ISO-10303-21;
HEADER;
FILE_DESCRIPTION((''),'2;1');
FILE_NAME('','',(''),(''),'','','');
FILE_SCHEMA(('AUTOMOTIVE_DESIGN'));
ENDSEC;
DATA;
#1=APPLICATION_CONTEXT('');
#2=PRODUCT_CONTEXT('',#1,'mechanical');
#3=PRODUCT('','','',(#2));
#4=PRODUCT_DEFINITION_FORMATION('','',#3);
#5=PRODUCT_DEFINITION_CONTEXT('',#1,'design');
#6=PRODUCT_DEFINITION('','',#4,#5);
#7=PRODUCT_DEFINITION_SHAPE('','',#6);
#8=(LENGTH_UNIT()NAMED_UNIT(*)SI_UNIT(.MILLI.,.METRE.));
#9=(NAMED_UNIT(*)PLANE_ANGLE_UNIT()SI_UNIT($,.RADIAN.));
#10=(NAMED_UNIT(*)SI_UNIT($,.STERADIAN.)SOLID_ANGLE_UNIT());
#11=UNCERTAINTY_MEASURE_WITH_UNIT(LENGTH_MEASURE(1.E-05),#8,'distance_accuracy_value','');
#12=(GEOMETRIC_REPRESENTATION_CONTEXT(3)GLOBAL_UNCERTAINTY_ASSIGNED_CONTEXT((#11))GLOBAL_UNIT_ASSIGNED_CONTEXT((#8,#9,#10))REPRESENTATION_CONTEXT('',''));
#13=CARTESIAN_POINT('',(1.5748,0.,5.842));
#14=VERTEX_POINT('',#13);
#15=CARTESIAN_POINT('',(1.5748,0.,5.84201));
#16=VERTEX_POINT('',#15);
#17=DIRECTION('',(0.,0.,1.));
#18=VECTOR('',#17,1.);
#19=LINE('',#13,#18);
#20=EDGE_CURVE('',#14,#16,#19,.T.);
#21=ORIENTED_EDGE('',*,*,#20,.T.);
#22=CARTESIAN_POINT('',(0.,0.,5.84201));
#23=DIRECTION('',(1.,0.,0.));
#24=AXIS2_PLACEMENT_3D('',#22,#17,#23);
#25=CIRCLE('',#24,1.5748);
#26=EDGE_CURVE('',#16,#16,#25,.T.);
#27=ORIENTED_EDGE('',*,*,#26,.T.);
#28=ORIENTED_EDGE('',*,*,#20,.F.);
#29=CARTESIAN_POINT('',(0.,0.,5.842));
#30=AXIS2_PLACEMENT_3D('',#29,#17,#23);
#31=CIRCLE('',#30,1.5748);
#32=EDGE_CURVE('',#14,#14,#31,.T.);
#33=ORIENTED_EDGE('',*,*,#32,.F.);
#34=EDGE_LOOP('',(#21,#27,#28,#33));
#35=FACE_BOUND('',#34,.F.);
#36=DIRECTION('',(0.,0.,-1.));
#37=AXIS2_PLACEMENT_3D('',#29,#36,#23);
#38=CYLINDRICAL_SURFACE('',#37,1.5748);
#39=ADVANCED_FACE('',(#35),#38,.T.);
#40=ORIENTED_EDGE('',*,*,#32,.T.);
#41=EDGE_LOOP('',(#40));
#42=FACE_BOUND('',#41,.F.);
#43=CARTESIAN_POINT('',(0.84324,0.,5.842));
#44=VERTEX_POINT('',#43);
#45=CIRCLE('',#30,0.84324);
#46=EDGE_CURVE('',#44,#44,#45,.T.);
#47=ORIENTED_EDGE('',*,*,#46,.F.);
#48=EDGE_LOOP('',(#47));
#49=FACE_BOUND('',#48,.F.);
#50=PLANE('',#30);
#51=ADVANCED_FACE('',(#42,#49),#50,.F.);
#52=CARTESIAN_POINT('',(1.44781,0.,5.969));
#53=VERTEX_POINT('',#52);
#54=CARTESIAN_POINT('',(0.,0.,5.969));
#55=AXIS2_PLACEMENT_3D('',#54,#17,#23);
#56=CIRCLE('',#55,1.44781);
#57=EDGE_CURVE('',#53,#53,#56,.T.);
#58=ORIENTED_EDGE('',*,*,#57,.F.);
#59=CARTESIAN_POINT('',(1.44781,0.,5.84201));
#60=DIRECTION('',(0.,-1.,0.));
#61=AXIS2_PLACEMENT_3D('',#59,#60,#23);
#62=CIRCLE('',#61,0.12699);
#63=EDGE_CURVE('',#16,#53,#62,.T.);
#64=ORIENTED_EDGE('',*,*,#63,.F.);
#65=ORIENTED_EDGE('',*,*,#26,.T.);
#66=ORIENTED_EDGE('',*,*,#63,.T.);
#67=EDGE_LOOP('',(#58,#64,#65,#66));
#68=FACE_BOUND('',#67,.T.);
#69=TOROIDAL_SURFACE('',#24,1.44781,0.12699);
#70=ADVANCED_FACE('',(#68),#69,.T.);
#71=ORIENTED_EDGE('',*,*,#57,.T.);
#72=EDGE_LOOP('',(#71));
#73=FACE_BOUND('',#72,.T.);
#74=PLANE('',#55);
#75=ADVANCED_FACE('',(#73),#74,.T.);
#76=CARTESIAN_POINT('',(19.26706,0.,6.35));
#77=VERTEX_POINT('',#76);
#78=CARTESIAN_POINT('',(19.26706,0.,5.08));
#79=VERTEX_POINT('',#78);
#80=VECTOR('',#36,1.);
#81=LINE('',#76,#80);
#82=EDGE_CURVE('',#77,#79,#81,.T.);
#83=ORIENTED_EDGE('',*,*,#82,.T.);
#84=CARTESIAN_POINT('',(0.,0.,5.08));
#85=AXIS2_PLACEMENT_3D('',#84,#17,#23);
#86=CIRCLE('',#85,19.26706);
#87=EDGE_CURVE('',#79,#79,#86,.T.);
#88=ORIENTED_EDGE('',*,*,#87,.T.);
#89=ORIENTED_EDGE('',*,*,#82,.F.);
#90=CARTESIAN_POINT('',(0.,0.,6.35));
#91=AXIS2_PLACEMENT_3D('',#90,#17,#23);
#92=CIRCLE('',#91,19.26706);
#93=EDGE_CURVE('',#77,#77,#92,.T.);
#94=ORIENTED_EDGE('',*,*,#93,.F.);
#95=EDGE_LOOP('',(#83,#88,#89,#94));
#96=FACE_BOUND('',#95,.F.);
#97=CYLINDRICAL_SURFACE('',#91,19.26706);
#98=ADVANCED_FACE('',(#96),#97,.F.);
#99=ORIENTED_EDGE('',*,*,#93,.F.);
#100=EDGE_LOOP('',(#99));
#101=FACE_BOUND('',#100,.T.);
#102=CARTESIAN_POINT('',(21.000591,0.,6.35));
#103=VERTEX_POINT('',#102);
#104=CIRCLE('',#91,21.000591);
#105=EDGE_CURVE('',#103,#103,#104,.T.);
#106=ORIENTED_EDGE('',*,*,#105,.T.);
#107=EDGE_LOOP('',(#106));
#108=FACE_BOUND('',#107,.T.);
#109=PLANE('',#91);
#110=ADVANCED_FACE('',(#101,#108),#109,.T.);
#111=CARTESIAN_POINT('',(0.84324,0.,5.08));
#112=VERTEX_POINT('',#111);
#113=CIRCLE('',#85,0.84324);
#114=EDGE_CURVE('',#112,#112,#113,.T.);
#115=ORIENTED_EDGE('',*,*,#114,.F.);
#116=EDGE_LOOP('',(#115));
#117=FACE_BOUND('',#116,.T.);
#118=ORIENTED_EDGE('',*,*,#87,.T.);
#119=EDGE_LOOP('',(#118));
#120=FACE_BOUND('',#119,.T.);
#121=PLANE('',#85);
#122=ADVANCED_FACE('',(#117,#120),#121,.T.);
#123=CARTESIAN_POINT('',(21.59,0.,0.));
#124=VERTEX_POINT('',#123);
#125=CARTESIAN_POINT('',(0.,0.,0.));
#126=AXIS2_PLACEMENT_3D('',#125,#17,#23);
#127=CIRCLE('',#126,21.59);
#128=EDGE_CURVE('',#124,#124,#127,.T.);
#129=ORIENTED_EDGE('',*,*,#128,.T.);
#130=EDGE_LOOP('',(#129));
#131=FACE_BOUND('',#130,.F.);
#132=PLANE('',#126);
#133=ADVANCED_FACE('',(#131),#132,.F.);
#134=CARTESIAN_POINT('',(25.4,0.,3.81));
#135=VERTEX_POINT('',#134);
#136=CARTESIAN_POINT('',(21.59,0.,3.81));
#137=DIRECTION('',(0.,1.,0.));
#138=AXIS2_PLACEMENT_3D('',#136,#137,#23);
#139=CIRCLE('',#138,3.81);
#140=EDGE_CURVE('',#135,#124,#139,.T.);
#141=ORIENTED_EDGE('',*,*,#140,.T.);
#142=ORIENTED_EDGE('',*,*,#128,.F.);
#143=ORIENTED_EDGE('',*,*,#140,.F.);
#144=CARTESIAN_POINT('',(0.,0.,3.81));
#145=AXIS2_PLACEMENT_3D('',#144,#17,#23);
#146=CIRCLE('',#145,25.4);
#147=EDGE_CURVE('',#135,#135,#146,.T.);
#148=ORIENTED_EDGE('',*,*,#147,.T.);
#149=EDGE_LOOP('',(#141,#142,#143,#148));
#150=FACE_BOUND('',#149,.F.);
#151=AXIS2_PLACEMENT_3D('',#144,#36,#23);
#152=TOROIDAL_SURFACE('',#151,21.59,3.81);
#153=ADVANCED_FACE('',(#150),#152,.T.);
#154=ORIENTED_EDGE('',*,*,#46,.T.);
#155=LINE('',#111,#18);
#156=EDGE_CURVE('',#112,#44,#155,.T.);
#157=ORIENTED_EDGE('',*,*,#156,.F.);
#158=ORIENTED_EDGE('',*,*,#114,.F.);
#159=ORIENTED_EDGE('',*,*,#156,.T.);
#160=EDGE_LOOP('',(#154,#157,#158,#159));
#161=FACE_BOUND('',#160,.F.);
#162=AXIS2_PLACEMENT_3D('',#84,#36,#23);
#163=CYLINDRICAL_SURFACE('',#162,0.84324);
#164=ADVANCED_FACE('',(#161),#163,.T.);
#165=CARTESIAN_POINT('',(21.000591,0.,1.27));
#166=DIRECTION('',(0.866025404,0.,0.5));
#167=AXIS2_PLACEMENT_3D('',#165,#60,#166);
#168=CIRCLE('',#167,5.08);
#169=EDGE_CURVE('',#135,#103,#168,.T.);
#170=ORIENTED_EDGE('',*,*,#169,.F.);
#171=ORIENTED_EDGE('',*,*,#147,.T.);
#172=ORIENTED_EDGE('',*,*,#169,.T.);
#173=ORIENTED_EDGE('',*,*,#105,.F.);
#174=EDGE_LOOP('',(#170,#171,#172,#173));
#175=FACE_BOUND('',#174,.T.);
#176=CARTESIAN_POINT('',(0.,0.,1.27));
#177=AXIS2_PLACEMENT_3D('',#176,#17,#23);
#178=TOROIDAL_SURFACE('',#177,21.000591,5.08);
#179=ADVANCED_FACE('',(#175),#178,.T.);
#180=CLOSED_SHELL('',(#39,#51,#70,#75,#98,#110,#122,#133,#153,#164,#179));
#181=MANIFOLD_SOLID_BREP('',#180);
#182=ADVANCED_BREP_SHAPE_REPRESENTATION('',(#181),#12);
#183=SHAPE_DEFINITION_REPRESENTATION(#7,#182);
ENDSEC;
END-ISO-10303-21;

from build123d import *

# Parameters (mm, degrees)
F0_R     = 25.4
F1_DEPTH = 6.35
F2_R     = 3.81
F4_R     = 19.2670598269
F5_DEPTH = 1.27
F6_R     = 0.8432395902
F7_DEPTH = 0.762
F8_R     = 1.5748
F8_R_2   = 0.8432395902
F9_DEPTH = 0.127
F10_R    = 0.12699


# Not quite as in the source:
# - a fillet or chamfer that OpenCascade refuses, or shapes differently, is made with other operations: its cross-section is extruded or revolved along the edge and cut away or added
# - a fillet or chamfer is up to 0.001 mm smaller than in the source, because OpenCascade refuses the exact size


with BuildPart() as f1:
    # F0 (on Top) → F1 (new body)
    with BuildSketch(Plane.XY):
        Circle(F0_R)
    extrude(amount=F1_DEPTH)

    # F2
    f2_edges = [f1.edges().sort_by_distance(p)[0] for p in [
        (-25.4, 0, 0),
    ]]
    fillet(f2_edges, radius=F2_R)

    # F3: fillet of radius 5.08 on 1 edges, made by hand

    # F3_s1 → F3_t2 (revolve, cut)
    with BuildSketch(Plane.XZ):
        with BuildLine():
            ThreePointArc((25.4, 3.81), (23.5405909488, 5.6694090512), (21.0005909488, 6.35))
            Line((21.0005909488, 6.35), (25.4, 6.35))
            Line((25.4, 6.35), (25.4, 3.81))
        make_face()
    revolve(axis=Axis((0, 0, 6.35), (0, 0, 1)), mode=Mode.SUBTRACT)

    # F4 (on face) → F5 (cut)
    with BuildSketch(Plane.XY.offset(6.35)):
        Circle(F4_R)
    extrude(amount=-F5_DEPTH, mode=Mode.SUBTRACT)

    # F6 (on face) → F7 (join)
    with BuildSketch(Plane.XY.offset(5.08)):
        Circle(F6_R)
    extrude(amount=F7_DEPTH)

    # F8 (on face) → F9 (join)
    with BuildSketch(Plane.XY.offset(5.842)):
        Circle(F8_R)
        Circle(F8_R_2, mode=Mode.SUBTRACT)
        Circle(F8_R_2)
    extrude(amount=F9_DEPTH)

    # F10 (radius 0.127 in the source; OpenCascade refuses exactly that, so slightly less here)
    f10_edges = [f1.edges().sort_by_distance(p)[0] for p in [
        (-1.5748, 0, 5.969),
    ]]
    fillet(f10_edges, radius=F10_R)


solid = f1.part
